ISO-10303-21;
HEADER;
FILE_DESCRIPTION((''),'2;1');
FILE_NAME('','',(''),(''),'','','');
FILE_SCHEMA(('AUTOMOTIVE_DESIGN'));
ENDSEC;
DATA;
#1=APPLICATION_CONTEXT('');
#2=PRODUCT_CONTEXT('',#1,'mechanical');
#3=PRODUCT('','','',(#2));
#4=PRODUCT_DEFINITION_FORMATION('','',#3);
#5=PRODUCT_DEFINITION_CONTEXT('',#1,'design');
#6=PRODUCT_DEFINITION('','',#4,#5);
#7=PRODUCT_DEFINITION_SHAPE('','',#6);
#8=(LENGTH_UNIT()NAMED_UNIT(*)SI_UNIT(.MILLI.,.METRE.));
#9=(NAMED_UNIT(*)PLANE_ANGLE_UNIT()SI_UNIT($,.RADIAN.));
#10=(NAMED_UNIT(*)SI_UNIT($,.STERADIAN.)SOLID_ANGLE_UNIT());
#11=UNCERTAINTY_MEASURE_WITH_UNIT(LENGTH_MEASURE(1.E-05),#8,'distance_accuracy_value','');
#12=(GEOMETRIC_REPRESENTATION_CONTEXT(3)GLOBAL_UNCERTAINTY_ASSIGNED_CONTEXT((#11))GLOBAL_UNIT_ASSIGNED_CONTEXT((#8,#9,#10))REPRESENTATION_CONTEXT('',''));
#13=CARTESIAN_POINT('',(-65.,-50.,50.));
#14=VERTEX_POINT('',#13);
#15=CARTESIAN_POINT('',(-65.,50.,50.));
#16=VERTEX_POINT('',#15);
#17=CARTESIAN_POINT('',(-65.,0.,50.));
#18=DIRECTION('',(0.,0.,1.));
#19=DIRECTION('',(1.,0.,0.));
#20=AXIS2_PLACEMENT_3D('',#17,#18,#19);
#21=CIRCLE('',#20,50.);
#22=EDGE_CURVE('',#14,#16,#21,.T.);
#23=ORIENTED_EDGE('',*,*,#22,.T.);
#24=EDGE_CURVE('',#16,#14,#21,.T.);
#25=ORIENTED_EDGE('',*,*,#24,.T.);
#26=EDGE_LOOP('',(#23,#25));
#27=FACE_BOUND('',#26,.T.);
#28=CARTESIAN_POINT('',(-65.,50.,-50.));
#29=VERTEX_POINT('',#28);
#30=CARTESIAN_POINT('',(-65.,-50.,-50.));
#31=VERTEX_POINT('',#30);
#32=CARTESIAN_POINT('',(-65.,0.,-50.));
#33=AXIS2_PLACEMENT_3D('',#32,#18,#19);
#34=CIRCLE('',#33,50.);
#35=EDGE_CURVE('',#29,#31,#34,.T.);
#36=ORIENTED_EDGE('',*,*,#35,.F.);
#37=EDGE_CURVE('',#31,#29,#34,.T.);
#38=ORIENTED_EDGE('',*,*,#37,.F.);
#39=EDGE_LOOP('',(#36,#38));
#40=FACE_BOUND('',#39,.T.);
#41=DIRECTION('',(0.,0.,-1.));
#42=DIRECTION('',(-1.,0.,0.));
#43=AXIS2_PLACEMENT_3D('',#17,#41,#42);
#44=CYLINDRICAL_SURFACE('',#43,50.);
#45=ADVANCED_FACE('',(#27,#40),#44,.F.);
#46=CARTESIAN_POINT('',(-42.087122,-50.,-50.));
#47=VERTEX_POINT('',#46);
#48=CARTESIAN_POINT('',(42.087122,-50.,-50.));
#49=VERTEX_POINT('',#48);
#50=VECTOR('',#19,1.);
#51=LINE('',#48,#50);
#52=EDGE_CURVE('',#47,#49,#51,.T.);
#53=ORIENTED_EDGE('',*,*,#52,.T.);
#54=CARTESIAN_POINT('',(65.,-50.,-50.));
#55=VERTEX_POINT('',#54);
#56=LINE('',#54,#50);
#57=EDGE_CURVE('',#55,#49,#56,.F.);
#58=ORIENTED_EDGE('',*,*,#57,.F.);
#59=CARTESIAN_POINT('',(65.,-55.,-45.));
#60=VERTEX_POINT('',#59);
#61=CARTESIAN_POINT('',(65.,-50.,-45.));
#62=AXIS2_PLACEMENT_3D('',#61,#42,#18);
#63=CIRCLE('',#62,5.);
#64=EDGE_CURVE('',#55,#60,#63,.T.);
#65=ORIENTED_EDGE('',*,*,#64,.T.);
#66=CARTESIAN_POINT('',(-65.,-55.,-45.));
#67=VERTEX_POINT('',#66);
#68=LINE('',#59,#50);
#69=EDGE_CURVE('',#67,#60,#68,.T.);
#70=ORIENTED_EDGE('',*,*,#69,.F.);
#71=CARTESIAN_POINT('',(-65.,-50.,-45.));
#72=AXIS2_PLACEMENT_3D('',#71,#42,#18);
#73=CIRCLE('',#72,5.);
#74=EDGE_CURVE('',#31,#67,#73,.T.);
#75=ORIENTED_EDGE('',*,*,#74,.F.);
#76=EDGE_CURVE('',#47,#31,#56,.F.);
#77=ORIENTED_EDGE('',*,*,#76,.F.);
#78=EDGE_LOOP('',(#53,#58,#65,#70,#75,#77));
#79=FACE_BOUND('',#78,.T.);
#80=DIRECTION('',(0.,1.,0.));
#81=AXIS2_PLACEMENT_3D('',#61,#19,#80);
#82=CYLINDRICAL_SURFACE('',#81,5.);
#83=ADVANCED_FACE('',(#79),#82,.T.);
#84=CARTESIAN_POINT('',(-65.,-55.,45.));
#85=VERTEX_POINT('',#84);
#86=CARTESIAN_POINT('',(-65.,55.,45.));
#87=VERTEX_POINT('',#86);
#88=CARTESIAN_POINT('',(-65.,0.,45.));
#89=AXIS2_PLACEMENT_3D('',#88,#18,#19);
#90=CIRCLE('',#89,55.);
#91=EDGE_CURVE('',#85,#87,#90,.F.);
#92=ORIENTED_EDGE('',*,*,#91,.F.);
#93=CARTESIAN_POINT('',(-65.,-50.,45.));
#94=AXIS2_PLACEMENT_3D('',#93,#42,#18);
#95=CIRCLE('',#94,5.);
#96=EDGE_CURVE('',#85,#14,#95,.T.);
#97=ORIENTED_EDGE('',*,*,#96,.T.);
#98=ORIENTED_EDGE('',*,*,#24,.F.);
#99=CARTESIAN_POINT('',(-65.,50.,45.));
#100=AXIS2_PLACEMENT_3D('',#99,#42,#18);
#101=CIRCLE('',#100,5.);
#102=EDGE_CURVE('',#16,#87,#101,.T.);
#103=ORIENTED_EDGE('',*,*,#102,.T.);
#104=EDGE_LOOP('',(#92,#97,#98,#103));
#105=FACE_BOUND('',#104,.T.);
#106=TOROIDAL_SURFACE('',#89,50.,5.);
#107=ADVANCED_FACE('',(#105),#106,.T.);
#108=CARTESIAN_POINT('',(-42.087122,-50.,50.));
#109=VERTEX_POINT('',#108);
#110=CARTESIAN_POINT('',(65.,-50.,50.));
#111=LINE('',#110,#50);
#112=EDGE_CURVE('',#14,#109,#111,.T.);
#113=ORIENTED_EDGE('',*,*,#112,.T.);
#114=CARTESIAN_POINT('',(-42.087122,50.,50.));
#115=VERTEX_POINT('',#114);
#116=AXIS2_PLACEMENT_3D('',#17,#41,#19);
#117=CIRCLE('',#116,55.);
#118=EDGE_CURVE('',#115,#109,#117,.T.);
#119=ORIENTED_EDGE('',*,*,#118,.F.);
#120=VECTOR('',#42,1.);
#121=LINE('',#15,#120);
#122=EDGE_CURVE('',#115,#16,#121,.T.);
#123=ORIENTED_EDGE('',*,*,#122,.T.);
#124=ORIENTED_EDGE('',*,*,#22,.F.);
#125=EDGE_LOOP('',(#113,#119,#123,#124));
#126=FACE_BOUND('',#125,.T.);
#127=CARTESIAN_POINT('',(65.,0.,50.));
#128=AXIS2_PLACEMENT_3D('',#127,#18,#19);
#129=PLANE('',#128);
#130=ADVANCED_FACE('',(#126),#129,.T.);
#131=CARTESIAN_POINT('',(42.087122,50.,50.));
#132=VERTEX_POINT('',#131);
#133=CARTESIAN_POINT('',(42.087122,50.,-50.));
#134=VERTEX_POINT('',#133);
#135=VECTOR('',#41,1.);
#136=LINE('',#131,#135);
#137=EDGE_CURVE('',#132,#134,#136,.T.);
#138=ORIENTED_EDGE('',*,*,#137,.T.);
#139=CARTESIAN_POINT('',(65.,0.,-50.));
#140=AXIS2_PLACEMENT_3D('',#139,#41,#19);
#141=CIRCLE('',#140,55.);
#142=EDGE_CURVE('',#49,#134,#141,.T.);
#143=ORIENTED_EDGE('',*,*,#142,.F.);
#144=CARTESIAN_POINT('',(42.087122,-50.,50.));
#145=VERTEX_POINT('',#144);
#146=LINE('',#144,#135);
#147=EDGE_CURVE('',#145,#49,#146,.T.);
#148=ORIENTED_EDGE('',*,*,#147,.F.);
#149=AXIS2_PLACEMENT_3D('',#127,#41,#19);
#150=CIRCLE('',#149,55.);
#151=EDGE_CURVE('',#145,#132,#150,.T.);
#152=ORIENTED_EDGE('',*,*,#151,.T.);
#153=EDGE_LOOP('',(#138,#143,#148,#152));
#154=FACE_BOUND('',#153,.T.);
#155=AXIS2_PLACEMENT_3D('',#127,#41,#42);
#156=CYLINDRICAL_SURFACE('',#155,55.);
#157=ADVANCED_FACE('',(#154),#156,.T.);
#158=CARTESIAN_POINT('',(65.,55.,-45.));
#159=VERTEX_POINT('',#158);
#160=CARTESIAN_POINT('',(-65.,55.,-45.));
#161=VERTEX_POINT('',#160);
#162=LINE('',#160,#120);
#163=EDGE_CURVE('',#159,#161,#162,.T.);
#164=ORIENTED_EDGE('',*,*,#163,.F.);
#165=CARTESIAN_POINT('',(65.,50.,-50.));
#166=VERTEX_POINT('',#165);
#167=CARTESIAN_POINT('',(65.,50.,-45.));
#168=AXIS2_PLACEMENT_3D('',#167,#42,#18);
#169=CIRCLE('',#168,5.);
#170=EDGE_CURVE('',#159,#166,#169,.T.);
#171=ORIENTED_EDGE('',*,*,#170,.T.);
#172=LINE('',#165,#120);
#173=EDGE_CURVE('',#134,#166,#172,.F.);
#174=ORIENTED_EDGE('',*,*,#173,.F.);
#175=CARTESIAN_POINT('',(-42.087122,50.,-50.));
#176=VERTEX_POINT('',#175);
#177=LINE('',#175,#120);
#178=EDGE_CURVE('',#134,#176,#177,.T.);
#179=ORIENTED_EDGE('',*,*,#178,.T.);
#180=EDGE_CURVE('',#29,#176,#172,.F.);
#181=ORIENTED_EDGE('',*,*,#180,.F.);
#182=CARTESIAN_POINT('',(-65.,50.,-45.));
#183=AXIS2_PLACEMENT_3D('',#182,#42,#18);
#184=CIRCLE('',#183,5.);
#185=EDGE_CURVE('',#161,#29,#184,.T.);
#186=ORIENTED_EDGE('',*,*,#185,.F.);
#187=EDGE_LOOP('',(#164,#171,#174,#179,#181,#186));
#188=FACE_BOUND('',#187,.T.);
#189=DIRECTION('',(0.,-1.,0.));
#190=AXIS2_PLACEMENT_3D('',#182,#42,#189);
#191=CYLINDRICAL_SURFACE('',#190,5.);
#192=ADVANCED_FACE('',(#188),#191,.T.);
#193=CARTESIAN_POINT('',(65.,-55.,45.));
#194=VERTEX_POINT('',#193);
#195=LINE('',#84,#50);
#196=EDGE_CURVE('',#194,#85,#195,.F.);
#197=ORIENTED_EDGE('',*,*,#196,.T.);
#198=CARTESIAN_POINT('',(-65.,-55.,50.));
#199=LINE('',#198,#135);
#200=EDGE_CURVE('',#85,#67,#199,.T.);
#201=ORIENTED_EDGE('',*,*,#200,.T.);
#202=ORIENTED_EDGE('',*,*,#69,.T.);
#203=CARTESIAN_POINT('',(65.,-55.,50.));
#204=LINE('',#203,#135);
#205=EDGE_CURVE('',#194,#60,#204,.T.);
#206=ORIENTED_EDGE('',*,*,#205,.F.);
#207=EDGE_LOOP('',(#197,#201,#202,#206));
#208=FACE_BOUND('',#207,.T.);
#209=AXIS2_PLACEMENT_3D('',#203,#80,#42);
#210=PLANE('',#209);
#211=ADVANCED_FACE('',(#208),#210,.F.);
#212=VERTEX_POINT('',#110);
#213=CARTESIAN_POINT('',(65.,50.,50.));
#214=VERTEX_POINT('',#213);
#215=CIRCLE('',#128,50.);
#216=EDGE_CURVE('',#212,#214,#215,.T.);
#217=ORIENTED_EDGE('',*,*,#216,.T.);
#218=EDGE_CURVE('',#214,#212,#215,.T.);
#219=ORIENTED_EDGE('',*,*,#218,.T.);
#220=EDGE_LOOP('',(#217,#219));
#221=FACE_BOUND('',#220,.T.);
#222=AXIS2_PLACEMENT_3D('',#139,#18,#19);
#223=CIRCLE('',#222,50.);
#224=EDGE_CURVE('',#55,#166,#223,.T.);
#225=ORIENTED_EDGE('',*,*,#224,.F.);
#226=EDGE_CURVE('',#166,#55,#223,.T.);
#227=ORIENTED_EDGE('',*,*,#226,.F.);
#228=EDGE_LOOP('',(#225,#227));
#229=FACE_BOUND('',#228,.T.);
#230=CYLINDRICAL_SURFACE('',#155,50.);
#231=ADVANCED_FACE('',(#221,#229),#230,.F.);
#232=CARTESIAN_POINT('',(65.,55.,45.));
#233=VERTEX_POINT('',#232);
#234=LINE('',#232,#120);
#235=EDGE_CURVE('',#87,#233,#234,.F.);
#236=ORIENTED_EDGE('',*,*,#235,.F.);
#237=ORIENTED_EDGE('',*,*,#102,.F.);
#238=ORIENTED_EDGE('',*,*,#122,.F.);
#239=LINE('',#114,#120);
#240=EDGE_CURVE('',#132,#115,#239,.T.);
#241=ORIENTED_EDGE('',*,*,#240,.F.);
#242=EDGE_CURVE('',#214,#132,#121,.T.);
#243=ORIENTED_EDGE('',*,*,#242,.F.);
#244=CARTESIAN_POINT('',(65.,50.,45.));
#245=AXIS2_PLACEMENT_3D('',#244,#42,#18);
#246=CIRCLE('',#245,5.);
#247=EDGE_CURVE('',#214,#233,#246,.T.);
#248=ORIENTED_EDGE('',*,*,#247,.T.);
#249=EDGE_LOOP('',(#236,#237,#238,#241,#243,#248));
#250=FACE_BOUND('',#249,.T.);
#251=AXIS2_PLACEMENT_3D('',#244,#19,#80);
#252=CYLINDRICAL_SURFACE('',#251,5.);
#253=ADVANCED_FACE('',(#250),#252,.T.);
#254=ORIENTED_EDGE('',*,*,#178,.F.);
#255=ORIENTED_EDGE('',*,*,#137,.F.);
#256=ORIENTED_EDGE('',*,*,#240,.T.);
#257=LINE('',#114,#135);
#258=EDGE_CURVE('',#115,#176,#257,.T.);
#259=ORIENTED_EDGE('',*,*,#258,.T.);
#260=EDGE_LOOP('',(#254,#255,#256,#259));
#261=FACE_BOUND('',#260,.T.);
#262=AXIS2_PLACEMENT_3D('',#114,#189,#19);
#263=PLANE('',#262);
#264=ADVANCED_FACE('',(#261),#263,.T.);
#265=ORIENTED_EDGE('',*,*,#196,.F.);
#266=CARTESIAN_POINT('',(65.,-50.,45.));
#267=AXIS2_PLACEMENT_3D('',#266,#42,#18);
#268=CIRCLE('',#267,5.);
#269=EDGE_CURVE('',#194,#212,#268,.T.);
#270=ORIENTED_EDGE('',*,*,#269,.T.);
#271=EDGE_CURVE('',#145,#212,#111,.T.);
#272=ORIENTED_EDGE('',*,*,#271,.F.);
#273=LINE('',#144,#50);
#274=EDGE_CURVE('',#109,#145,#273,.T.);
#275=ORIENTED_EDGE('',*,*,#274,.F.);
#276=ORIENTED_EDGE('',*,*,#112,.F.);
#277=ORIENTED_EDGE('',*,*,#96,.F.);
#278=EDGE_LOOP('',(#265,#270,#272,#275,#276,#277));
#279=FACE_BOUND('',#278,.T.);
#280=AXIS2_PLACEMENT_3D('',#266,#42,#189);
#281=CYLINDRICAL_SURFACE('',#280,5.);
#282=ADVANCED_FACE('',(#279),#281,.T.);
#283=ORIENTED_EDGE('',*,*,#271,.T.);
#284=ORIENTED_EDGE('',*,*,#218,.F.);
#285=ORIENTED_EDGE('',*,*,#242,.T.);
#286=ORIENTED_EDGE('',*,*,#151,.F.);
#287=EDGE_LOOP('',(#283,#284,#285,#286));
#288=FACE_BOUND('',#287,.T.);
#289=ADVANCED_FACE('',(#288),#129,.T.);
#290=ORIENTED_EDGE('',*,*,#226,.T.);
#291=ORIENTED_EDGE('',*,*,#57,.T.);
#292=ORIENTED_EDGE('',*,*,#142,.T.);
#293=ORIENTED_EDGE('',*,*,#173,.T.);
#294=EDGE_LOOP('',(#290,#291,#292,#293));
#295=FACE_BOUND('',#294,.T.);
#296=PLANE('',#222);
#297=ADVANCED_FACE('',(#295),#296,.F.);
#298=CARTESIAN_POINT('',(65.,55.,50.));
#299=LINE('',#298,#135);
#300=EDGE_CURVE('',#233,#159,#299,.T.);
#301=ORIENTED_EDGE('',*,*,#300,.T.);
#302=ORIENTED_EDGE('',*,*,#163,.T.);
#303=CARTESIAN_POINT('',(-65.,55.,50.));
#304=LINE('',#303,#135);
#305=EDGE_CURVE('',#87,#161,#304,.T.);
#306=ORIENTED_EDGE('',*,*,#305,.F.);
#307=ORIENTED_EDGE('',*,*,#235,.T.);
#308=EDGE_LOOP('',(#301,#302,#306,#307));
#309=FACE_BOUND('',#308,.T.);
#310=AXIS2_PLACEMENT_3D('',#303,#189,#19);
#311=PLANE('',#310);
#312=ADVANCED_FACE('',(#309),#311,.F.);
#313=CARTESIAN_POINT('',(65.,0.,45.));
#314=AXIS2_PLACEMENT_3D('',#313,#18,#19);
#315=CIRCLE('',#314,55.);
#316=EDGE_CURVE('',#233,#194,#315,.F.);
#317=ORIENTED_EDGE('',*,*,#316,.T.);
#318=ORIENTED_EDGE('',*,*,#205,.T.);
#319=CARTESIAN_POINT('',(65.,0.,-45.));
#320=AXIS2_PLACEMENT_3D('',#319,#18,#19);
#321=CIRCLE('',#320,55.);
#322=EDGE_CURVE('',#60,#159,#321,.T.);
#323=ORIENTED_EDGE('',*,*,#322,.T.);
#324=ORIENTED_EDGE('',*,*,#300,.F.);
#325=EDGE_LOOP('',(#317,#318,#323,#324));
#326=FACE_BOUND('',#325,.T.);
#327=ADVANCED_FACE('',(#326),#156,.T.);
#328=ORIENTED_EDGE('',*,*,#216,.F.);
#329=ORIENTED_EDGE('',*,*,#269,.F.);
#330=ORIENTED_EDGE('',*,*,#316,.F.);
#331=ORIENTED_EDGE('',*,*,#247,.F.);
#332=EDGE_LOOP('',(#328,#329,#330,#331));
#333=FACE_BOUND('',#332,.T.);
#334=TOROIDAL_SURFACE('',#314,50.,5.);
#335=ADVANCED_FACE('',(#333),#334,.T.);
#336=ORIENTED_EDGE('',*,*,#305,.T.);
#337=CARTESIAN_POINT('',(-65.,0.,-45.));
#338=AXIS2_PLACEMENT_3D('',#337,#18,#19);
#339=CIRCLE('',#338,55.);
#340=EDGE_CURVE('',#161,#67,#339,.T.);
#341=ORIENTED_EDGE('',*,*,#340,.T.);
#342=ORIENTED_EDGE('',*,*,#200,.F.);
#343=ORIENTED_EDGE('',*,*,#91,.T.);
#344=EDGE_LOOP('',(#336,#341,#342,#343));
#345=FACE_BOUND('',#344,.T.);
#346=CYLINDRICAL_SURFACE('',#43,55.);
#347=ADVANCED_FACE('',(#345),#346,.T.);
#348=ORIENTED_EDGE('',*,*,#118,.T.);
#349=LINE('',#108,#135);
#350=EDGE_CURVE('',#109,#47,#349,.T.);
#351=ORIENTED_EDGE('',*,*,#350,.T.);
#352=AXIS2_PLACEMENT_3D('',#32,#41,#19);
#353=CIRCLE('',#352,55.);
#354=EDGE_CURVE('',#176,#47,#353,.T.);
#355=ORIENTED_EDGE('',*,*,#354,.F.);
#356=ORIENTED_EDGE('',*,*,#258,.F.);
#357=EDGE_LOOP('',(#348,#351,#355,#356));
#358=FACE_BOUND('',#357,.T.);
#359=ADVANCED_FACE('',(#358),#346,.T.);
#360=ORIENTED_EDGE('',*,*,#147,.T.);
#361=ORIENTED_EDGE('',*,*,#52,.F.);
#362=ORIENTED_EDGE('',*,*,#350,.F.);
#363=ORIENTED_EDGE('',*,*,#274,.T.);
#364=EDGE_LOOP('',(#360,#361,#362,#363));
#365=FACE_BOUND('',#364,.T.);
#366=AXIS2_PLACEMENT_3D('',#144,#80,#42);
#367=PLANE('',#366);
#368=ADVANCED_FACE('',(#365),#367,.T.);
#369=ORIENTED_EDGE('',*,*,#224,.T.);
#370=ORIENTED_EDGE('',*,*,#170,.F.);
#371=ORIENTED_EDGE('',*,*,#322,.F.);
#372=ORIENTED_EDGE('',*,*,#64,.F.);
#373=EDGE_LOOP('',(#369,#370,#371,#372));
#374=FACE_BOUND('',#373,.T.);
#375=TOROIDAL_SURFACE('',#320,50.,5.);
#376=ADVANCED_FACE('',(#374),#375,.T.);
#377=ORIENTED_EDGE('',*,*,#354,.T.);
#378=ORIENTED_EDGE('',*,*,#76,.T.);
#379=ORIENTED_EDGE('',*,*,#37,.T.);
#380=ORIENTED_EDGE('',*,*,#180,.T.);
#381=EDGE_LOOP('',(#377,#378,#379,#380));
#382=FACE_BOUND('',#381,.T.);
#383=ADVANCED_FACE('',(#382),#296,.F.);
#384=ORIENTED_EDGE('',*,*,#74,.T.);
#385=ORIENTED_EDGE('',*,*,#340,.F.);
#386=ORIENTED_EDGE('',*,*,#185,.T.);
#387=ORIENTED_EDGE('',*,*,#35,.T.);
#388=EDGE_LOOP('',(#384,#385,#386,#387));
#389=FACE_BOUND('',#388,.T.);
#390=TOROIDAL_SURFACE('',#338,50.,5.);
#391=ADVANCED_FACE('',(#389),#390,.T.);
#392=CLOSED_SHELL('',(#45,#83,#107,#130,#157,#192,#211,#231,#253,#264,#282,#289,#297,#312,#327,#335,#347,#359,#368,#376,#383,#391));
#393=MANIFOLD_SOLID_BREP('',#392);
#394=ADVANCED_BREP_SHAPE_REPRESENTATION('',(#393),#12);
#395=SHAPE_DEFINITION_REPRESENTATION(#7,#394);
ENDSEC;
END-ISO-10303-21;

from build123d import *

# Parameters (mm, degrees)
SKETCH1_R           = 50
BOSS_EXTRUDE1_DEPTH = 50
FILLET1_START       = -120
FILLET1_DEPTH       = 240
FILLET1_2_ANGLE     = 180
FILLET1_3_ANGLE     = 180


with BuildPart() as part:
    # Sketch1 → Boss-Extrude1 (new, symmetric)
    with BuildSketch(Plane.XY):
        with BuildLine():
            Line((-65, 55), (65, 55))
            ThreePointArc((65, 55), (120, 0), (65, -55))
            Line((65, -55), (-65, -55))
            ThreePointArc((-65, -55), (-120, 0), (-65, 55))
        make_face()
        with Locations(Location((-65, 0, 0), (0, 0, 180))):
            Circle(SKETCH1_R, mode=Mode.SUBTRACT)
        with Locations(Location((65, 0, 0), (0, 0, 180))):
            Circle(SKETCH1_R, mode=Mode.SUBTRACT)
        with BuildLine():
            Line((-42.087121525, 50), (42.087121525, 50))
            ThreePointArc((42.087121525, 50), (10, 0), (42.087121525, -50))
            Line((42.087121525, -50), (-42.087121525, -50))
            ThreePointArc((-42.087121525, -50), (-10, 0), (-42.087121525, 50))
        make_face(mode=Mode.SUBTRACT)
    extrude(amount=BOSS_EXTRUDE1_DEPTH, both=True)

    # Fillet1: read off the stored shape, not the designer's step
    # Fillet1 outline → Fillet1 (cut)
    with BuildSketch(Plane.YZ.offset(FILLET1_START)):
        with BuildLine():
            Line((55, -50), (55, -45))
            ThreePointArc((55, -45), (53.535533906, -48.535533906), (50, -50))
            Line((50, -50), (55, -50))
        make_face()
        with BuildLine():
            ThreePointArc((50, 50), (53.535533906, 48.535533906), (55, 45))
            Line((55, 45), (55, 50))
            Line((55, 50), (50, 50))
        make_face()
        with BuildLine():
            Line((-55, -50), (-50, -50))
            ThreePointArc((-50, -50), (-53.535533906, -48.535533906), (-55, -45))
            Line((-55, -45), (-55, -50))
        make_face()
        with BuildLine():
            ThreePointArc((-55, 45), (-53.535533906, 48.535533906), (-50, 50))
            Line((-50, 50), (-55, 50))
            Line((-55, 50), (-55, 45))
        make_face()
    extrude(amount=FILLET1_DEPTH, mode=Mode.SUBTRACT)

    # Fillet1 2 outline → Fillet1 2 (revolve, cut)
    with BuildSketch(Plane(origin=(65, 0, 0), x_dir=(0, -1, 0), z_dir=(-1, 0, 0))):
        with BuildLine():
            ThreePointArc((55, -45), (53.535533906, -48.535533906), (50, -50))
            Line((50, -50), (55, -50))
            Line((55, -50), (55, -45))
        make_face()
        with BuildLine():
            ThreePointArc((50, 50), (53.535533906, 48.535533906), (55, 45))
            Line((55, 45), (55, 50))
            Line((55, 50), (50, 50))
        make_face()
    revolve(axis=Axis((65, 0, 0), (0, 0, 1)), revolution_arc=FILLET1_2_ANGLE, mode=Mode.SUBTRACT)

    # Fillet1 3 outline → Fillet1 3 (revolve, cut)
    with BuildSketch(Plane.YZ.offset(-65)):
        with BuildLine():
            ThreePointArc((55, -45), (53.535533906, -48.535533906), (50, -50))
            Line((50, -50), (55, -50))
            Line((55, -50), (55, -45))
        make_face()
        with BuildLine():
            ThreePointArc((50, 50), (53.535533906, 48.535533906), (55, 45))
            Line((55, 45), (55, 50))
            Line((55, 50), (50, 50))
        make_face()
    revolve(axis=Axis((-65, 0, 0), (0, 0, 1)), revolution_arc=FILLET1_3_ANGLE, mode=Mode.SUBTRACT)


solid = part.part
